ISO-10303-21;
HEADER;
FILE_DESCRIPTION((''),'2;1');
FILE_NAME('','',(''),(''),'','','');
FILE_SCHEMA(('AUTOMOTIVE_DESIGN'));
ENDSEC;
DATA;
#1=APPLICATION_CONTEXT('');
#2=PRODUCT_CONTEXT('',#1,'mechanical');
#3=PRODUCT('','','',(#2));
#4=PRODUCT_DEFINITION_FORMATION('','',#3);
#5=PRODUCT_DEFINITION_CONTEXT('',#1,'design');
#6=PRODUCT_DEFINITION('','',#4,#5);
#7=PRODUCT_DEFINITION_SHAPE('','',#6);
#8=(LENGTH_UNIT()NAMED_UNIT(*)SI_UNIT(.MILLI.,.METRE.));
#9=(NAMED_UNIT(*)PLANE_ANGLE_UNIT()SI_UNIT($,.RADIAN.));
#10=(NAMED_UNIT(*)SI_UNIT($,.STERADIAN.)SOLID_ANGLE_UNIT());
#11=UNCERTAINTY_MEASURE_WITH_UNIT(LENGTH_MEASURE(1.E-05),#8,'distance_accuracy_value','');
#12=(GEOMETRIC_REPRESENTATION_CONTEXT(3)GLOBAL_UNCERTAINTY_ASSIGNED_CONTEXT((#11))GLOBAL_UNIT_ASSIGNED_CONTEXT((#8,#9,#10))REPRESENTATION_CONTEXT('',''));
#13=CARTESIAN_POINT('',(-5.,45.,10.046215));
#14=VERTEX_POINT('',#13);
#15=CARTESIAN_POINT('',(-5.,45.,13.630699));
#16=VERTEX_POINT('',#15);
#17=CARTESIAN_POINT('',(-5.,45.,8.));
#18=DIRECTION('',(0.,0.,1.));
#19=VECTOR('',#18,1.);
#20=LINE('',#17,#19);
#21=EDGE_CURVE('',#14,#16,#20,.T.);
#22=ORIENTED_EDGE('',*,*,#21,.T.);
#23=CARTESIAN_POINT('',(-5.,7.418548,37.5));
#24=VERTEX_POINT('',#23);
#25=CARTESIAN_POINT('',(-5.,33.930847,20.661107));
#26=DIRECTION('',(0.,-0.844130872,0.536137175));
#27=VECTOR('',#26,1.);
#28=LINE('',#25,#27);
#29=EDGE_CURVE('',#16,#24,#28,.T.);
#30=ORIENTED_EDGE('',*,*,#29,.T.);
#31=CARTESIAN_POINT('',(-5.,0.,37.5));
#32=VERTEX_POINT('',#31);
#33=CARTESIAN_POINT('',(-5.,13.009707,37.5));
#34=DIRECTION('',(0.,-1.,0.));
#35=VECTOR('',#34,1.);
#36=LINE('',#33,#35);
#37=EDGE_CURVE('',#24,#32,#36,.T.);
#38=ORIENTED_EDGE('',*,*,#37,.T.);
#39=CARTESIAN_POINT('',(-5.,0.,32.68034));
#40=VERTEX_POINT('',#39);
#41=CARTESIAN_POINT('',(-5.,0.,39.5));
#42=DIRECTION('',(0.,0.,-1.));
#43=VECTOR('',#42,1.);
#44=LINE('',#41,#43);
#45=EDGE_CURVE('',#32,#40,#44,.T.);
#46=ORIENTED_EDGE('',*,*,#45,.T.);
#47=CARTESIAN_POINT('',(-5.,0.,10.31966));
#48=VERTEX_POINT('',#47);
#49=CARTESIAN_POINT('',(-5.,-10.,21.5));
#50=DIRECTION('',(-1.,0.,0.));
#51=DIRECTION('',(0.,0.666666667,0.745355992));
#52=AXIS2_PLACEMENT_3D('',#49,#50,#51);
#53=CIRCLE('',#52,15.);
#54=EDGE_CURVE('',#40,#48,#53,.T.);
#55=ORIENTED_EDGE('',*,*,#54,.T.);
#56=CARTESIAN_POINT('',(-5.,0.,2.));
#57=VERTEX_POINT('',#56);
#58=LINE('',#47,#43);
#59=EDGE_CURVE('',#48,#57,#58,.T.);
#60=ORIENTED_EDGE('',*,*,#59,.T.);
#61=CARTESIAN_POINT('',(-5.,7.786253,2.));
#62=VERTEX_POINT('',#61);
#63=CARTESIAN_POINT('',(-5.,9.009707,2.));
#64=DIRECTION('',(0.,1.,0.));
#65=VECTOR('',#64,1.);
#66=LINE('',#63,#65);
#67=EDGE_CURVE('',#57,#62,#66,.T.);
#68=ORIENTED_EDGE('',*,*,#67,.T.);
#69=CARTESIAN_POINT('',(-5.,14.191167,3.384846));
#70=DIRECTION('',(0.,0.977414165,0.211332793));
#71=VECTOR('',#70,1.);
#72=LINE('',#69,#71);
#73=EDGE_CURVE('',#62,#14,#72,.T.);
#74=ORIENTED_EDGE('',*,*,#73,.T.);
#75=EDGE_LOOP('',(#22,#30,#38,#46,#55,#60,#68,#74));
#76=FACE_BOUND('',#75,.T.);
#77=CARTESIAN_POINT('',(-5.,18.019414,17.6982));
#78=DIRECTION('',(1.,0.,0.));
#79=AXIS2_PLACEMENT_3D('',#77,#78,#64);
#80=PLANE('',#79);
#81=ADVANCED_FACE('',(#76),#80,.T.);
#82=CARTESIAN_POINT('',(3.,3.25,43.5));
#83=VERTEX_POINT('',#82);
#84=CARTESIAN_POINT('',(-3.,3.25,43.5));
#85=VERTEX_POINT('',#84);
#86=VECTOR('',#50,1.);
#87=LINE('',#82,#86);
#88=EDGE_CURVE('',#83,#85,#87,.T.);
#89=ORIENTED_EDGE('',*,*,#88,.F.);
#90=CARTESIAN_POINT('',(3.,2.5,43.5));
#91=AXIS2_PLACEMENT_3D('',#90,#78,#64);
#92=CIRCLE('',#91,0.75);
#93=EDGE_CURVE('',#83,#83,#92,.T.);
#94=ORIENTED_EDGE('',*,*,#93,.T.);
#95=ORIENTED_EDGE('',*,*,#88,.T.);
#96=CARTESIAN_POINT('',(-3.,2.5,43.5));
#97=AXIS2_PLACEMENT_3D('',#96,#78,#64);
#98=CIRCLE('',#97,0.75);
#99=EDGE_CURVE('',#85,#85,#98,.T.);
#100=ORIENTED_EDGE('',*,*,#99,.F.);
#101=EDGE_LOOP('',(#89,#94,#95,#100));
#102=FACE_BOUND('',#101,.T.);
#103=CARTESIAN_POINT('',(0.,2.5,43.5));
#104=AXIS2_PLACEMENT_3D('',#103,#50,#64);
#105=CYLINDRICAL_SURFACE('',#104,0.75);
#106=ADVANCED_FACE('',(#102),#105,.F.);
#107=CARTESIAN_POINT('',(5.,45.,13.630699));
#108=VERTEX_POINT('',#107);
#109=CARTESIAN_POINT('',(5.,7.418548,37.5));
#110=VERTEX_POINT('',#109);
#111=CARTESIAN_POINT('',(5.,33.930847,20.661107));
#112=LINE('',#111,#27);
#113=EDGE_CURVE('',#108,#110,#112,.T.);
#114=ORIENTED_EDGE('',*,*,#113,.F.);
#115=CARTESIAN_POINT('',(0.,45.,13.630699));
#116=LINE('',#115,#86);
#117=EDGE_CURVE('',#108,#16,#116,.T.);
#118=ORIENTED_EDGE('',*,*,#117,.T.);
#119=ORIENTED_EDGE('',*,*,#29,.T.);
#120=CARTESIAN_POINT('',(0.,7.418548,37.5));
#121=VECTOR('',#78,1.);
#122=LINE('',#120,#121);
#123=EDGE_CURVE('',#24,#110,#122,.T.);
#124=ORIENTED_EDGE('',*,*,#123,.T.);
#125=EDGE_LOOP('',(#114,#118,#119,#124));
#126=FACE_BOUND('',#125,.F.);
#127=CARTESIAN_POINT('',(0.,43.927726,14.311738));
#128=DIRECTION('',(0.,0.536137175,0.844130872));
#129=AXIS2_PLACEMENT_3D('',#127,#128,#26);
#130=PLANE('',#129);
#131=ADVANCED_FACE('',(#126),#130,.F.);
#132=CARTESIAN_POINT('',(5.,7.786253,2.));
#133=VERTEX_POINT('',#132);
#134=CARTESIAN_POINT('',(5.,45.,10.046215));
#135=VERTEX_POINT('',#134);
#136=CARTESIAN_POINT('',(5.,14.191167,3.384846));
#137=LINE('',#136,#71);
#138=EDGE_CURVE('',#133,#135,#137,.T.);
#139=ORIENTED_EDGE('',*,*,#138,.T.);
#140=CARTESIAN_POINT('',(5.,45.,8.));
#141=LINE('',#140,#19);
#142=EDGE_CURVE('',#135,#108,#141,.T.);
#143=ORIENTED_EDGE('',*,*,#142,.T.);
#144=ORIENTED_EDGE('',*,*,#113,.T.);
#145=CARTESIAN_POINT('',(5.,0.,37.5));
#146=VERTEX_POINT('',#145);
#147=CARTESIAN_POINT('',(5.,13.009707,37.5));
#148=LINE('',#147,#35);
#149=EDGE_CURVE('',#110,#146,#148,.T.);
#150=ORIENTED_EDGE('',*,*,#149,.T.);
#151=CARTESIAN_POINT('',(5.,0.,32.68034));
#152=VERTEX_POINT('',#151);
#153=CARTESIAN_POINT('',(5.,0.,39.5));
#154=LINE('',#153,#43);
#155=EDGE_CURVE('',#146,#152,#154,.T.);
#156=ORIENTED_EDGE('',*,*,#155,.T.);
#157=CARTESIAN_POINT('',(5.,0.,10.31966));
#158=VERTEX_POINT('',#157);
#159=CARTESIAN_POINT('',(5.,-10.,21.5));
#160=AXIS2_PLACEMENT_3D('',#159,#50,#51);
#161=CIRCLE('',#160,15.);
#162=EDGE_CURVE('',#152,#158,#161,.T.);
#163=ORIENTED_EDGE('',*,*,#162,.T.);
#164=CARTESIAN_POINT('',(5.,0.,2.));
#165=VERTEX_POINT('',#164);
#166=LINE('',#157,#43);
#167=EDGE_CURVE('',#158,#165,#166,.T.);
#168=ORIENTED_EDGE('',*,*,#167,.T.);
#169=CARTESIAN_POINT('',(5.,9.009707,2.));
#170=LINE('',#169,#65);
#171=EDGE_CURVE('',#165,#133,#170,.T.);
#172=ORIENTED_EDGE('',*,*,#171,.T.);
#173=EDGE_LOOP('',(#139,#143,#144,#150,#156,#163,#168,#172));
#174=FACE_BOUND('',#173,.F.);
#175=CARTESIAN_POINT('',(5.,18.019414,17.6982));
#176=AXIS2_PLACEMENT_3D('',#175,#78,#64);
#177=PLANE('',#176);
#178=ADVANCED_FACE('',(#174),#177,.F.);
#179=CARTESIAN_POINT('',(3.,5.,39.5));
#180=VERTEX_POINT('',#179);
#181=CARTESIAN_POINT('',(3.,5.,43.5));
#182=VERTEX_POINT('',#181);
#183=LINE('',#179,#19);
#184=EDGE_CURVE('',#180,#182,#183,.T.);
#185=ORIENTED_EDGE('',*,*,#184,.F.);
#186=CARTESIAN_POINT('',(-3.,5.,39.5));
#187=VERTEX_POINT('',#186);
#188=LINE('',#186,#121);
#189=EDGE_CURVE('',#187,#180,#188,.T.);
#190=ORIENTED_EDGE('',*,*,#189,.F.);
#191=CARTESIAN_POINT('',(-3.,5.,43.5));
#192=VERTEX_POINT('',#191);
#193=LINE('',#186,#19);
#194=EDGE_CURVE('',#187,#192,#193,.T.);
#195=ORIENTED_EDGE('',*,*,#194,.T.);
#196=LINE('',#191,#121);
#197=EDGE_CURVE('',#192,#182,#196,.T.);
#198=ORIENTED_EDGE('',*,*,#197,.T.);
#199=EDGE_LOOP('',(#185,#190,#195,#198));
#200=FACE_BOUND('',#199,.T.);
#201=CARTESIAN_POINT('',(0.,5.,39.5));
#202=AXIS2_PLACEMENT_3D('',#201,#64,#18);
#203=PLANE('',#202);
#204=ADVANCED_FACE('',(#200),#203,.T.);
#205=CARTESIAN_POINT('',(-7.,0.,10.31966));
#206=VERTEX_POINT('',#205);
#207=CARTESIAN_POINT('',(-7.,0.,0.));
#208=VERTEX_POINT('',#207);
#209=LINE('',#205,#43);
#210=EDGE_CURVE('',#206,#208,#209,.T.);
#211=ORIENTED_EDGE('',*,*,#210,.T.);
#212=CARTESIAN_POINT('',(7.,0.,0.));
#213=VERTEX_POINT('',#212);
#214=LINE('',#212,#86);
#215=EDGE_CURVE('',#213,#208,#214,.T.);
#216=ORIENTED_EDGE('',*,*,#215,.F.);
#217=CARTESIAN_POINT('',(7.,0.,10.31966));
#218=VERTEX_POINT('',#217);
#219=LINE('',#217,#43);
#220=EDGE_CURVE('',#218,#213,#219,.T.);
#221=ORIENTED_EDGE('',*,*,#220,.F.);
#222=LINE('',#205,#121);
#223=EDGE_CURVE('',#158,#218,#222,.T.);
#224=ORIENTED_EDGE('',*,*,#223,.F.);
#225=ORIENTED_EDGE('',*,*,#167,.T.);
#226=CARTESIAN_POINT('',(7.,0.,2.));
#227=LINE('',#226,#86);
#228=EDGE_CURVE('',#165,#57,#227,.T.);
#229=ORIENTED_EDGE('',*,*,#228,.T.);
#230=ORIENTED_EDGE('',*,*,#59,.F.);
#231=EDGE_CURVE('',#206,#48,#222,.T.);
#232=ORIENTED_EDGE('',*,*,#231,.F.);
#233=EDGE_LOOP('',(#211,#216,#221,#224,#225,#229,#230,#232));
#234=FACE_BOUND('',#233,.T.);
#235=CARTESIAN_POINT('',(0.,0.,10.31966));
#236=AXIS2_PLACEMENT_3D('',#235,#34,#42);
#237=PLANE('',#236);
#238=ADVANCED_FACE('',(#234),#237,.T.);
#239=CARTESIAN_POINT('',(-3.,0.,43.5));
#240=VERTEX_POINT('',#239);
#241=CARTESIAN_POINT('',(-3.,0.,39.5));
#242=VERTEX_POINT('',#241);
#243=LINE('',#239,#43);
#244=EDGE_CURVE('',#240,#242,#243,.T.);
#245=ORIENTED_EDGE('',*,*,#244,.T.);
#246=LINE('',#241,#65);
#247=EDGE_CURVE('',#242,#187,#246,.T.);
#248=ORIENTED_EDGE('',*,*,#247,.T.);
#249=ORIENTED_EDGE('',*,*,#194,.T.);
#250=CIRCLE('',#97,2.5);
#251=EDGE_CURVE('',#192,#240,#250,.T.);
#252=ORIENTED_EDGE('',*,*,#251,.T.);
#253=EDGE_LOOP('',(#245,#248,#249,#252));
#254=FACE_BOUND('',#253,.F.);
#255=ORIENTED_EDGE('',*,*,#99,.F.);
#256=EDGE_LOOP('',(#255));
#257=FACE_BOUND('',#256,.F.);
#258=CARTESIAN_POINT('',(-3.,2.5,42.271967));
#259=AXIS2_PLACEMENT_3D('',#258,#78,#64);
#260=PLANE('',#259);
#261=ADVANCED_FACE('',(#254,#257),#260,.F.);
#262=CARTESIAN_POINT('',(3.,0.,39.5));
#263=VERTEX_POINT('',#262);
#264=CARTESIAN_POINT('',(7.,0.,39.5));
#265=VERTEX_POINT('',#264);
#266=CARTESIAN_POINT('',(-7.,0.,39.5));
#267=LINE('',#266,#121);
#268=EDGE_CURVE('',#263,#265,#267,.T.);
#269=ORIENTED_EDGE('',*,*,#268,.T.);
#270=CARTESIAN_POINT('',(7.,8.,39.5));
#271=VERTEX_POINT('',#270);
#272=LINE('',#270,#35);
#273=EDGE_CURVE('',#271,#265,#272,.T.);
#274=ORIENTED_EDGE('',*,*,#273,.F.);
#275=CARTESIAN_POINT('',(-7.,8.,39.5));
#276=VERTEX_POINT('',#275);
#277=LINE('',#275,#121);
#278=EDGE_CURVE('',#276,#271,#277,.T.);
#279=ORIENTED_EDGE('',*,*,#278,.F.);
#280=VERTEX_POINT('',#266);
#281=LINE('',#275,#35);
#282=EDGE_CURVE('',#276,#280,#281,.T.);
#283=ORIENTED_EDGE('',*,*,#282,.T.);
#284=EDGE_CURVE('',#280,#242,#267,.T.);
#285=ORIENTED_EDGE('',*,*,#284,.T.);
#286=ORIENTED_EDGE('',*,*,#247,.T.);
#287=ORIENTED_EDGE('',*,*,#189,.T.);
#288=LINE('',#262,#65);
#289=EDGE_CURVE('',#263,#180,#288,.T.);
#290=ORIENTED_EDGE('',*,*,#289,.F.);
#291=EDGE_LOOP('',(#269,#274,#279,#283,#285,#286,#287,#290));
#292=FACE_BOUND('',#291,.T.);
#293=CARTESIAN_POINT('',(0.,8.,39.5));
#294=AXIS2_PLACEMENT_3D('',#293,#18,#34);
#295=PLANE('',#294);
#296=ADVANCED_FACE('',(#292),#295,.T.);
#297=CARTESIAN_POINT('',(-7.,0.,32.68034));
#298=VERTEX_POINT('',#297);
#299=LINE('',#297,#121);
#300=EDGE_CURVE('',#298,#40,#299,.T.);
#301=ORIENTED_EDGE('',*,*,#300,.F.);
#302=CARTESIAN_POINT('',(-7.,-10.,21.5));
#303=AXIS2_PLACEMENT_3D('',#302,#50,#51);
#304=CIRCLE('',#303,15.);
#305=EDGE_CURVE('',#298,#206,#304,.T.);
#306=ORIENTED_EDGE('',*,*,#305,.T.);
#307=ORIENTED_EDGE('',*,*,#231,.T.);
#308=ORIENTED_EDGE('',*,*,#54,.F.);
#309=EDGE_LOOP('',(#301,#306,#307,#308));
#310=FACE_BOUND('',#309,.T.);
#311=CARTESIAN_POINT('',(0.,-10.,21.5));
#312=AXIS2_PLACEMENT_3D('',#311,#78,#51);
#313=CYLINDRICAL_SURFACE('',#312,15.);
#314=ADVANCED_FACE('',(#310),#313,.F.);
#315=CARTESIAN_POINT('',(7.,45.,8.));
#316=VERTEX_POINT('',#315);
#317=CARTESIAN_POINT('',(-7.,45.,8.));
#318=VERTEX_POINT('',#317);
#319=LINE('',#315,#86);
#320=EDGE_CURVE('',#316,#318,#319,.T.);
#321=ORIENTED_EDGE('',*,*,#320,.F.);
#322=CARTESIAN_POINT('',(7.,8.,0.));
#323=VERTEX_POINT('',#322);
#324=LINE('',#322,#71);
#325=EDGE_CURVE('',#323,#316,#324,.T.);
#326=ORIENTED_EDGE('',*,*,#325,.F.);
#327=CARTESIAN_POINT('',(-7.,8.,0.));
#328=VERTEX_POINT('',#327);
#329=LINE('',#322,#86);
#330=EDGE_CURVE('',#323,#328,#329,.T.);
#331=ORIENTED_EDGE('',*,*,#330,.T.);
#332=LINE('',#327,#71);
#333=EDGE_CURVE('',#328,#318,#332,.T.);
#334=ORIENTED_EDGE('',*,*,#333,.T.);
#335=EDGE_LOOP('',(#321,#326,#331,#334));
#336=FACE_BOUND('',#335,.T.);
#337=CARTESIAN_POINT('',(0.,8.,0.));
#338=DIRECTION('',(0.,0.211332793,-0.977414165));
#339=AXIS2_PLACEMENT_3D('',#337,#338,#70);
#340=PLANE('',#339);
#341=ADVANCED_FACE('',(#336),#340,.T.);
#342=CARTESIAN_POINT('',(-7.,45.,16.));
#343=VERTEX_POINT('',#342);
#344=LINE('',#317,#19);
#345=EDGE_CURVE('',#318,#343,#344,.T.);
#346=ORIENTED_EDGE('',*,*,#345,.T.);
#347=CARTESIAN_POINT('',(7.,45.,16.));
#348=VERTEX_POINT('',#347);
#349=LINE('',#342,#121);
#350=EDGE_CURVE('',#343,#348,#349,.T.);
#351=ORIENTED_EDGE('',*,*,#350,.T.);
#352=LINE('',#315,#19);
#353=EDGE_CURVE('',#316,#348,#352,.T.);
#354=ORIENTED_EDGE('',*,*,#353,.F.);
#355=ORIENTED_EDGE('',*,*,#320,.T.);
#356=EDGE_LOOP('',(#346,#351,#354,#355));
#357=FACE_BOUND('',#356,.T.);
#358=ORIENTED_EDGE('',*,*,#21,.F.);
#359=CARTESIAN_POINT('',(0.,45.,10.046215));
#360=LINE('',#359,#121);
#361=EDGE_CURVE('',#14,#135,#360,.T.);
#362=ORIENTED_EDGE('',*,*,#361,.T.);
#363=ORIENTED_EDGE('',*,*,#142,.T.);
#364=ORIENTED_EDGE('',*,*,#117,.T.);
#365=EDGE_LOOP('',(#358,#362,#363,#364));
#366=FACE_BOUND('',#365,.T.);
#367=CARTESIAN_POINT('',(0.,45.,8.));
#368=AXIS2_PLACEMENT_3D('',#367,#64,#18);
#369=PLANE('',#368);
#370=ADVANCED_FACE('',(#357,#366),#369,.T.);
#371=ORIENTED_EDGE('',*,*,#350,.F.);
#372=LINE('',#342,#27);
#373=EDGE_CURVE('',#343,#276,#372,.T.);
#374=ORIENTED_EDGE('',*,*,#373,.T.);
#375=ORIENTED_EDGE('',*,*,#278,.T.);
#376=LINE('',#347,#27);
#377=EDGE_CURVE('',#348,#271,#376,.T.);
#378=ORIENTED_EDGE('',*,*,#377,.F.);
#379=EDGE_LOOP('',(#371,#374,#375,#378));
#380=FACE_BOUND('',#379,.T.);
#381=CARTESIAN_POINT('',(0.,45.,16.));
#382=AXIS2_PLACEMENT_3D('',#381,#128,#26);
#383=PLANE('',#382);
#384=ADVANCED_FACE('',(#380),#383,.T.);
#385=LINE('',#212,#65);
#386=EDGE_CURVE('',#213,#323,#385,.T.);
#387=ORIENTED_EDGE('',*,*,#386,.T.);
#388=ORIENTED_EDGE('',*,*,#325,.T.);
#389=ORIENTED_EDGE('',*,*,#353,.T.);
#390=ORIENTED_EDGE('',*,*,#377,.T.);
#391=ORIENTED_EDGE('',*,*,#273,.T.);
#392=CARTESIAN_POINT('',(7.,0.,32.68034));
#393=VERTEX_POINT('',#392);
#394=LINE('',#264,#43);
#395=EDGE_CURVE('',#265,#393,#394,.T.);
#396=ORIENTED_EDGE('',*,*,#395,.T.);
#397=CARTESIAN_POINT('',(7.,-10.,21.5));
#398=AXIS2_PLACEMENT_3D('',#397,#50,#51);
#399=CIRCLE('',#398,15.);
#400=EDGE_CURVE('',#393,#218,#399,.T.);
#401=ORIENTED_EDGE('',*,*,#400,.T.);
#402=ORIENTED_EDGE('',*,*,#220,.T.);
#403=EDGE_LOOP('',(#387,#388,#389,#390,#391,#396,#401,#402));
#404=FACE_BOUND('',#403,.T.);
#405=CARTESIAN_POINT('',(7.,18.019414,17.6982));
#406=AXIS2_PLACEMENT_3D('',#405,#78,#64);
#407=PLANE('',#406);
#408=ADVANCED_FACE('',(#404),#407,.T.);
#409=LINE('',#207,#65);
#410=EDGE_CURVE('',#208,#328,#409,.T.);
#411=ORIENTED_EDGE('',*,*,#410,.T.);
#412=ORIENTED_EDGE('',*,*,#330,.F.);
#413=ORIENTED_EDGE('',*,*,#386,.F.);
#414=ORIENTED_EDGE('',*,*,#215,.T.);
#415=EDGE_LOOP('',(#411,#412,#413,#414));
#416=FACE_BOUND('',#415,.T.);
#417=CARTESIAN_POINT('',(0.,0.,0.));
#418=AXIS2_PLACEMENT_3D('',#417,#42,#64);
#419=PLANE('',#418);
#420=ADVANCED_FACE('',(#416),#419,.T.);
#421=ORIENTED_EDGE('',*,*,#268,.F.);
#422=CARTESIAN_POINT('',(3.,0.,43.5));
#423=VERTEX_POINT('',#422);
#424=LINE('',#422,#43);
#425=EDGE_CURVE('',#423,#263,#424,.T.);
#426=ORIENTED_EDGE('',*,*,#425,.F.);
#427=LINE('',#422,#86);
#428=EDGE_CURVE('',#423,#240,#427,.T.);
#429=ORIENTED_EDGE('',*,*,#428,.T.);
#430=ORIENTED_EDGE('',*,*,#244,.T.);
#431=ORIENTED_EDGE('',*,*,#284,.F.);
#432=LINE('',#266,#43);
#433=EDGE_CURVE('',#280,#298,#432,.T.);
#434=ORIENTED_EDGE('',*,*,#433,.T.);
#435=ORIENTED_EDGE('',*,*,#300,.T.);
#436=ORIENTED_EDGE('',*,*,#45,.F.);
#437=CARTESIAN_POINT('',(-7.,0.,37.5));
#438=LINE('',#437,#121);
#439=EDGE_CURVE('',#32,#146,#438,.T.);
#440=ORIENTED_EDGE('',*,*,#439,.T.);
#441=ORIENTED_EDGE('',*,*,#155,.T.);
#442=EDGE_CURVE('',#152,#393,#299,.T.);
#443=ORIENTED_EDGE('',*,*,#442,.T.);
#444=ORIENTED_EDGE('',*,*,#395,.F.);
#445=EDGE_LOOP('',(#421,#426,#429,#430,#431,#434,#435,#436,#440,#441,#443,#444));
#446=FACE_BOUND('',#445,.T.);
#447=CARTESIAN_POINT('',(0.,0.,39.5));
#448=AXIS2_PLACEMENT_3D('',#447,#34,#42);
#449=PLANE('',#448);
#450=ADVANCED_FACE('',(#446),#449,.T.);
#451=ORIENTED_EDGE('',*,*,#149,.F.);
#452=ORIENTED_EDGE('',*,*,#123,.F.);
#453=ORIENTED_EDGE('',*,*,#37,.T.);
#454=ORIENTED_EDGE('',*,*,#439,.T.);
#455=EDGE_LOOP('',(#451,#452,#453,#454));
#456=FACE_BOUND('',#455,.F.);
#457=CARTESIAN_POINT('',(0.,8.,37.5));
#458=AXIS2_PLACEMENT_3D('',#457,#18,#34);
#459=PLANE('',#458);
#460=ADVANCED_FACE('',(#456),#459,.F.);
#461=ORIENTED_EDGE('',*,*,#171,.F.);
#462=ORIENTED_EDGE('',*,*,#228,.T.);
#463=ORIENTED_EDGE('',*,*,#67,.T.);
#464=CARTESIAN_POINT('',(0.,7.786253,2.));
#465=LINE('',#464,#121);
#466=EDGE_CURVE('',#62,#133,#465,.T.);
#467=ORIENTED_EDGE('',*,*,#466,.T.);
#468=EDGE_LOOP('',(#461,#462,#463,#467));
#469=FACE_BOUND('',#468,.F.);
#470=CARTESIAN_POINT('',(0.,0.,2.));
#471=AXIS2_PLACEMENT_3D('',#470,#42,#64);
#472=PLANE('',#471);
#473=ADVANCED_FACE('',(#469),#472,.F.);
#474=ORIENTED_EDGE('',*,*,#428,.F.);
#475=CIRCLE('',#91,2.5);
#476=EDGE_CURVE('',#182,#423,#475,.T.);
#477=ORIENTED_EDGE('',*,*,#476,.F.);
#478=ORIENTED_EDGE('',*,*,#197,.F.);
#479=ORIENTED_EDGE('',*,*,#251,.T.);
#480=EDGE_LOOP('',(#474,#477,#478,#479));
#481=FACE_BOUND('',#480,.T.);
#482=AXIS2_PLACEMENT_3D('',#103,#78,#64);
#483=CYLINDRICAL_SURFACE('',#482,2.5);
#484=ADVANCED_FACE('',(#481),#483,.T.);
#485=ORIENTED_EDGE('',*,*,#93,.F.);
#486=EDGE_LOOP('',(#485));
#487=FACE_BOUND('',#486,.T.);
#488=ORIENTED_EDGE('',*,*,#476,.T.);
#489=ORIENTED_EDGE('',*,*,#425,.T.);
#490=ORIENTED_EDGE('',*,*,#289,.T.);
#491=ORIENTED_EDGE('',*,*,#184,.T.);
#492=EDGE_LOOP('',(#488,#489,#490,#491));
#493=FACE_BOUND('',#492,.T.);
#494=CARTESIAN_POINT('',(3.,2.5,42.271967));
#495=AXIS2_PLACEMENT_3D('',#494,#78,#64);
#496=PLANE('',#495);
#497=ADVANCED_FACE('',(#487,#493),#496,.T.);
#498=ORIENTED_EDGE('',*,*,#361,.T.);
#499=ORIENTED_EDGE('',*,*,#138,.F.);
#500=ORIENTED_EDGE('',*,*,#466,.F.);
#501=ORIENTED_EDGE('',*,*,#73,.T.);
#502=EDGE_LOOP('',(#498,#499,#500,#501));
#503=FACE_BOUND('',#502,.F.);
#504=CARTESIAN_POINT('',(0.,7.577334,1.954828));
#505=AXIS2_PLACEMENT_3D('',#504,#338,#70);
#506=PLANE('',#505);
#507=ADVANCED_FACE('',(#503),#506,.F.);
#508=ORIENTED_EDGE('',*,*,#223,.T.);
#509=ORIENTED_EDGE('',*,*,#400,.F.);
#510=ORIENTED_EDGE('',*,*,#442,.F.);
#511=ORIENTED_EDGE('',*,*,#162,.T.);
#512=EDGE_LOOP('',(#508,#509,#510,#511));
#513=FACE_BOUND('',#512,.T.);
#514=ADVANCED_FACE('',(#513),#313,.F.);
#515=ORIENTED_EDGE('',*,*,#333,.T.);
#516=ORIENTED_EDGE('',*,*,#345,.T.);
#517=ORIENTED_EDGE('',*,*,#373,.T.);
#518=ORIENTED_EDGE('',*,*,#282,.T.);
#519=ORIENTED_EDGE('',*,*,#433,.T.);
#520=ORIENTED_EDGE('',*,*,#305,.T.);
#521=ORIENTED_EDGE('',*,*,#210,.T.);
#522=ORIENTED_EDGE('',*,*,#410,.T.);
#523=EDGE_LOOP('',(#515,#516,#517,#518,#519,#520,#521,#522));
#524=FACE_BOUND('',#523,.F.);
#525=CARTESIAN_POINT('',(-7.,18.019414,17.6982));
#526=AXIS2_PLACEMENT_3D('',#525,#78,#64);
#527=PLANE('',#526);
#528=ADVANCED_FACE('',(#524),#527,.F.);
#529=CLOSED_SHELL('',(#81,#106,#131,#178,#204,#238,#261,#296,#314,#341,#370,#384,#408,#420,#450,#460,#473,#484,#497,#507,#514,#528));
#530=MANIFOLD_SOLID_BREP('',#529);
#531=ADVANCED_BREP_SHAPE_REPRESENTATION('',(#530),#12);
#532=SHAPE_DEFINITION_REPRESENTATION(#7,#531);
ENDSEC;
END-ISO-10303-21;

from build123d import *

# Parameters (mm, degrees)
F1_DEPTH = 7
F2_T     = -2
F3_R     = 0.75
F4_DEPTH = 3


# Not quite as in the source:
# - a feature names something its author has since deleted; it is built from what else it names


with BuildPart() as f1:
    # F0 (on Right) → F1 (new body, symmetric)
    with BuildSketch(Plane.YZ):
        with BuildLine():
            Line((45, 8), (45, 16))
            Line((45, 16), (8, 39.5))
            Line((8, 39.5), (0, 39.5))
            Line((0, 39.5), (0, 32.6803398875))
            ThreePointArc((0, 32.6803398875), (5, 21.5), (0, 10.3196601125))
            Line((0, 10.3196601125), (0, 0))
            Line((0, 0), (8, 0))
            Line((8, 0), (45, 8))
        make_face()
    extrude(amount=F1_DEPTH, both=True)

    # F2
    f2_openings = [f1.faces().sort_by_distance(p)[0] for p in [
        (0, 0, 36.09017),
        (0, 5, 21.5),
        (0, 0, 5.15983),
        (0, 45, 12),
    ]]
    offset(amount=F2_T, openings=f2_openings)

    # F3 (on Right) → F4 (join, symmetric)
    with BuildSketch(Plane.YZ):
        with BuildLine():
            Line((0, 39.5), (5, 39.5))
            Line((5, 39.5), (5, 43.5))
            ThreePointArc((5, 43.5), (2.5, 46), (0, 43.5))
            Line((0, 43.5), (0, 39.5))
        make_face()
        with Locations((2.5, 43.5)):
            Circle(F3_R, mode=Mode.SUBTRACT)
    extrude(amount=F4_DEPTH, both=True)


solid = f1.part
